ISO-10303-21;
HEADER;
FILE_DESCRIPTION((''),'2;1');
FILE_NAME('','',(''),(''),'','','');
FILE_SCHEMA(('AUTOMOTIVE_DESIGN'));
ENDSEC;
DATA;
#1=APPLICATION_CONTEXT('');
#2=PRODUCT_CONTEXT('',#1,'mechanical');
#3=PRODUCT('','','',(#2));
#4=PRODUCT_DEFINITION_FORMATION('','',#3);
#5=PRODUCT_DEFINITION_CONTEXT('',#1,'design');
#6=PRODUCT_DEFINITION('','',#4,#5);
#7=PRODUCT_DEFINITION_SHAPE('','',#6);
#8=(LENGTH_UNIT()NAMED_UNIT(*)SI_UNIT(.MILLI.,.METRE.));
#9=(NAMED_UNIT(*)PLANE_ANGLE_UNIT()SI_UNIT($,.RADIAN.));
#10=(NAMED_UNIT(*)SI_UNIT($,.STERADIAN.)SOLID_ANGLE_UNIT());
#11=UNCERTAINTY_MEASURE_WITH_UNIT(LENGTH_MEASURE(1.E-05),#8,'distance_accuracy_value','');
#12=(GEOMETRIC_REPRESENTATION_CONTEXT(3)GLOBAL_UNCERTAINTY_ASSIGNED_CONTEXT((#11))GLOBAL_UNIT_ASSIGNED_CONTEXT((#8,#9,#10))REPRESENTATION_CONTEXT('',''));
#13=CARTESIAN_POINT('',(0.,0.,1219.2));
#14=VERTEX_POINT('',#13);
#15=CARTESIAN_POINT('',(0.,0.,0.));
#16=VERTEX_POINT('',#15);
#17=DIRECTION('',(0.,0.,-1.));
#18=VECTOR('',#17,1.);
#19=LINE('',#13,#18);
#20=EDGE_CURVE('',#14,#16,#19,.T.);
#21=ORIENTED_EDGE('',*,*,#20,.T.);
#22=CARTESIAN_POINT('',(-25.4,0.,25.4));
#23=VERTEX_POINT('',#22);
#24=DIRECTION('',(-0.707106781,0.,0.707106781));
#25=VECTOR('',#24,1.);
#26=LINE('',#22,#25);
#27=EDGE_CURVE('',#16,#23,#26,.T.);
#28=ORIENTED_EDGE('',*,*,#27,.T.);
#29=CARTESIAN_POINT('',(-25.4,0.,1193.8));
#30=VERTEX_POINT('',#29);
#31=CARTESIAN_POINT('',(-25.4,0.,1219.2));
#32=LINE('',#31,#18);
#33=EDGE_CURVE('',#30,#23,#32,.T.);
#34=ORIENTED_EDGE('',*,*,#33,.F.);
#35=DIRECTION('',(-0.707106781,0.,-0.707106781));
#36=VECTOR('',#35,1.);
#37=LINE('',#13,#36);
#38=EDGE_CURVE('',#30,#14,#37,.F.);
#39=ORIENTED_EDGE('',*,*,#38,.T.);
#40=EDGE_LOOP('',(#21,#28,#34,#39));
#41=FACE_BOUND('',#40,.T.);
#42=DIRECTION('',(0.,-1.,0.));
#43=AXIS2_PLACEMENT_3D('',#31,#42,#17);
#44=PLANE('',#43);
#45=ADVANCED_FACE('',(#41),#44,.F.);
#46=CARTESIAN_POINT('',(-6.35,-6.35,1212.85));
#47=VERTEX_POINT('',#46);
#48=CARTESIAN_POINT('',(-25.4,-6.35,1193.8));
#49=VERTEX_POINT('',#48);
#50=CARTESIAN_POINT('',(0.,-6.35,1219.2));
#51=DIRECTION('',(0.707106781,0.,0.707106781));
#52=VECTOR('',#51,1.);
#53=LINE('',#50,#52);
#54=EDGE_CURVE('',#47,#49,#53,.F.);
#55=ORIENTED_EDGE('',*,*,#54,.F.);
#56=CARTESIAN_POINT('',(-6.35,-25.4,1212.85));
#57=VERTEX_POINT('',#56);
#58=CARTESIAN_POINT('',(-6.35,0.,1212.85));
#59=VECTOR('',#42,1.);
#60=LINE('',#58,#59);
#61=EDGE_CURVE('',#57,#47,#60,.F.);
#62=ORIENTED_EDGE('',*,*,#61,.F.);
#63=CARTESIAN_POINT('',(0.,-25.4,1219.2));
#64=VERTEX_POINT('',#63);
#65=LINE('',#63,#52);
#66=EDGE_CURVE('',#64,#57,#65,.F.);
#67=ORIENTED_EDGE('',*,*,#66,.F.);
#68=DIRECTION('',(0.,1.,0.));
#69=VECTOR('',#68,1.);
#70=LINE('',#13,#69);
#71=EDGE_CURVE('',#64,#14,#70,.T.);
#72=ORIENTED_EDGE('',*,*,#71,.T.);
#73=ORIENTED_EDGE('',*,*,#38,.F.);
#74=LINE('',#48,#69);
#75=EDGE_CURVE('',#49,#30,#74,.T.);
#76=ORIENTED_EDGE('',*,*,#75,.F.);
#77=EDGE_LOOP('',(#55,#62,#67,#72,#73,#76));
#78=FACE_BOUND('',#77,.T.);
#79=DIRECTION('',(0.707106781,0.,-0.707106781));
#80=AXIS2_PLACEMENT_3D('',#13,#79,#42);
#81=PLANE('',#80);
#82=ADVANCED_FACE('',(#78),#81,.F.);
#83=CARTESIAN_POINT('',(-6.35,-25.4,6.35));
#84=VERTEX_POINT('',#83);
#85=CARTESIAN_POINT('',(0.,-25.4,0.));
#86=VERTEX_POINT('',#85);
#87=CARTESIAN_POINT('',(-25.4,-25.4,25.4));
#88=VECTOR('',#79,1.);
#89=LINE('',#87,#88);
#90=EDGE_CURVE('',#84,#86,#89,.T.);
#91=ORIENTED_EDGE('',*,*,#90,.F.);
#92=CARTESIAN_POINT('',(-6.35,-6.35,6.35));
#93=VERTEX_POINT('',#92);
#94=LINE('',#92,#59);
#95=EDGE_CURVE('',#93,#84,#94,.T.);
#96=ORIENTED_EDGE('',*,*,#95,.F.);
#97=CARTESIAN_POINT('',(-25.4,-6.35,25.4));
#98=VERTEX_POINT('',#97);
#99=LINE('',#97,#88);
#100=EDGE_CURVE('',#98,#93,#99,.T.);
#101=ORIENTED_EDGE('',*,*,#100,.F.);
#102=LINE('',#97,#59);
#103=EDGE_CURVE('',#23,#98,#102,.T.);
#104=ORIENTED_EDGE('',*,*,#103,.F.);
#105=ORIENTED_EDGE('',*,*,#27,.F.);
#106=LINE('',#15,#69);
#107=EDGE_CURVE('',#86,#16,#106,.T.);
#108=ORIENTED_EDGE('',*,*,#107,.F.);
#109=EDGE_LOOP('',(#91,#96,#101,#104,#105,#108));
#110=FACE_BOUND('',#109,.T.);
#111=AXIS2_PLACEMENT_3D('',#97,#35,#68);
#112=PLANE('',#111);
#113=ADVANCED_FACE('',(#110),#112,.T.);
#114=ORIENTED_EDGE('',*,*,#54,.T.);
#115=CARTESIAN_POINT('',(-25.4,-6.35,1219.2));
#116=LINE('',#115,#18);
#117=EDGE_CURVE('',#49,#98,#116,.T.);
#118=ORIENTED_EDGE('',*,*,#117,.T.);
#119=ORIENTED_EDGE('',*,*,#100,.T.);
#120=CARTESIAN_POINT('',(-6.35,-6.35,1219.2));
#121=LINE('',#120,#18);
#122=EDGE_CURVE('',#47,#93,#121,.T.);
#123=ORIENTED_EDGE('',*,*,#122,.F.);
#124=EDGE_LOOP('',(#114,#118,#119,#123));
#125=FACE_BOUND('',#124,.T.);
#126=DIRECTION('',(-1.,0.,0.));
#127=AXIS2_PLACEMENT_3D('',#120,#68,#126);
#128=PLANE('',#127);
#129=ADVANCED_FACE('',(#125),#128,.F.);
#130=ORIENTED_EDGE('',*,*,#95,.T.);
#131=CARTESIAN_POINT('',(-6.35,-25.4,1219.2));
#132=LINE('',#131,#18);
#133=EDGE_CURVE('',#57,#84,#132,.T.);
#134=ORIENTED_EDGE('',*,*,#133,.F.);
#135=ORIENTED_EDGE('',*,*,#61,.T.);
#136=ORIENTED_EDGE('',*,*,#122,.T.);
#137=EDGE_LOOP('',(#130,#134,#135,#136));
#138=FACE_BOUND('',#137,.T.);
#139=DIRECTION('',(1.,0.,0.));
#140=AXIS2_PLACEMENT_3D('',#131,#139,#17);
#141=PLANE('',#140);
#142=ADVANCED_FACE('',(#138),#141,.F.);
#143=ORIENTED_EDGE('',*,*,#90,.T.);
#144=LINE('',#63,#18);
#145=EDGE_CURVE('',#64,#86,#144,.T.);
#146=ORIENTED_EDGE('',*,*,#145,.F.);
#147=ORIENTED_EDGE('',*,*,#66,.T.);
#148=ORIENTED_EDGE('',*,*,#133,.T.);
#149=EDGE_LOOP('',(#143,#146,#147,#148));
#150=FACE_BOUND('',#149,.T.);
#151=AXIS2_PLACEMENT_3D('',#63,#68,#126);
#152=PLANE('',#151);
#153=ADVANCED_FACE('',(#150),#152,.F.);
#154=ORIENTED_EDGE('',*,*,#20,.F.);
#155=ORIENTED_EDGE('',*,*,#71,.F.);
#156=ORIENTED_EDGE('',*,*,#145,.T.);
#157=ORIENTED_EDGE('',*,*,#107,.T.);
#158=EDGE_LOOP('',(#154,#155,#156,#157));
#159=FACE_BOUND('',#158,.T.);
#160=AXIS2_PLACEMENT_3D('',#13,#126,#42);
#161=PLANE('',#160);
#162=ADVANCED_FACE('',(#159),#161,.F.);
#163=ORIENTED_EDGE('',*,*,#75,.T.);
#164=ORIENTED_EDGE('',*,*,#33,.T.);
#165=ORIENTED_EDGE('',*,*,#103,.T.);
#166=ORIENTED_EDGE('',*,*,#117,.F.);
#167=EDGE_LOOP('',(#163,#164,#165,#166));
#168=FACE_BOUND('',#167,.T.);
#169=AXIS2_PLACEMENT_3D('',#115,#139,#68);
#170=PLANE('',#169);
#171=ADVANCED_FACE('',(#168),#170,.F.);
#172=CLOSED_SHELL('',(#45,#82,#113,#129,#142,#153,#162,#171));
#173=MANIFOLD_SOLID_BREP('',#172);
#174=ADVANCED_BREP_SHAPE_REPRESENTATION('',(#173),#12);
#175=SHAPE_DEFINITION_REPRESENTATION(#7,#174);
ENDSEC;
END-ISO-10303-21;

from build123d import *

# Parameters (mm, degrees)
BOSS_EXTRUDE1_DEPTH = 1219.2
CHAMFER1_SIZE       = 25.4


with BuildPart() as part:
    # Sketch1 → Boss-Extrude1 (new body)
    with BuildSketch(Plane.XY):
        Polygon((0, 0), (0, -25.4), (-6.35, -25.4), (-6.35, -6.35), (-25.4, -6.35), (-25.4, 0), align=None)
    extrude(amount=BOSS_EXTRUDE1_DEPTH)

    # Chamfer1
    chamfer1_edges = [part.edges().sort_by_distance(p)[0] for p in [
        (-25.4, -3.175, 0),
        (-25.4, -3.175, 1219.2),
    ]]
    chamfer(chamfer1_edges, length=CHAMFER1_SIZE - 0.0001)  # a hair under: the kernel refuses the full size


solid = part.part
